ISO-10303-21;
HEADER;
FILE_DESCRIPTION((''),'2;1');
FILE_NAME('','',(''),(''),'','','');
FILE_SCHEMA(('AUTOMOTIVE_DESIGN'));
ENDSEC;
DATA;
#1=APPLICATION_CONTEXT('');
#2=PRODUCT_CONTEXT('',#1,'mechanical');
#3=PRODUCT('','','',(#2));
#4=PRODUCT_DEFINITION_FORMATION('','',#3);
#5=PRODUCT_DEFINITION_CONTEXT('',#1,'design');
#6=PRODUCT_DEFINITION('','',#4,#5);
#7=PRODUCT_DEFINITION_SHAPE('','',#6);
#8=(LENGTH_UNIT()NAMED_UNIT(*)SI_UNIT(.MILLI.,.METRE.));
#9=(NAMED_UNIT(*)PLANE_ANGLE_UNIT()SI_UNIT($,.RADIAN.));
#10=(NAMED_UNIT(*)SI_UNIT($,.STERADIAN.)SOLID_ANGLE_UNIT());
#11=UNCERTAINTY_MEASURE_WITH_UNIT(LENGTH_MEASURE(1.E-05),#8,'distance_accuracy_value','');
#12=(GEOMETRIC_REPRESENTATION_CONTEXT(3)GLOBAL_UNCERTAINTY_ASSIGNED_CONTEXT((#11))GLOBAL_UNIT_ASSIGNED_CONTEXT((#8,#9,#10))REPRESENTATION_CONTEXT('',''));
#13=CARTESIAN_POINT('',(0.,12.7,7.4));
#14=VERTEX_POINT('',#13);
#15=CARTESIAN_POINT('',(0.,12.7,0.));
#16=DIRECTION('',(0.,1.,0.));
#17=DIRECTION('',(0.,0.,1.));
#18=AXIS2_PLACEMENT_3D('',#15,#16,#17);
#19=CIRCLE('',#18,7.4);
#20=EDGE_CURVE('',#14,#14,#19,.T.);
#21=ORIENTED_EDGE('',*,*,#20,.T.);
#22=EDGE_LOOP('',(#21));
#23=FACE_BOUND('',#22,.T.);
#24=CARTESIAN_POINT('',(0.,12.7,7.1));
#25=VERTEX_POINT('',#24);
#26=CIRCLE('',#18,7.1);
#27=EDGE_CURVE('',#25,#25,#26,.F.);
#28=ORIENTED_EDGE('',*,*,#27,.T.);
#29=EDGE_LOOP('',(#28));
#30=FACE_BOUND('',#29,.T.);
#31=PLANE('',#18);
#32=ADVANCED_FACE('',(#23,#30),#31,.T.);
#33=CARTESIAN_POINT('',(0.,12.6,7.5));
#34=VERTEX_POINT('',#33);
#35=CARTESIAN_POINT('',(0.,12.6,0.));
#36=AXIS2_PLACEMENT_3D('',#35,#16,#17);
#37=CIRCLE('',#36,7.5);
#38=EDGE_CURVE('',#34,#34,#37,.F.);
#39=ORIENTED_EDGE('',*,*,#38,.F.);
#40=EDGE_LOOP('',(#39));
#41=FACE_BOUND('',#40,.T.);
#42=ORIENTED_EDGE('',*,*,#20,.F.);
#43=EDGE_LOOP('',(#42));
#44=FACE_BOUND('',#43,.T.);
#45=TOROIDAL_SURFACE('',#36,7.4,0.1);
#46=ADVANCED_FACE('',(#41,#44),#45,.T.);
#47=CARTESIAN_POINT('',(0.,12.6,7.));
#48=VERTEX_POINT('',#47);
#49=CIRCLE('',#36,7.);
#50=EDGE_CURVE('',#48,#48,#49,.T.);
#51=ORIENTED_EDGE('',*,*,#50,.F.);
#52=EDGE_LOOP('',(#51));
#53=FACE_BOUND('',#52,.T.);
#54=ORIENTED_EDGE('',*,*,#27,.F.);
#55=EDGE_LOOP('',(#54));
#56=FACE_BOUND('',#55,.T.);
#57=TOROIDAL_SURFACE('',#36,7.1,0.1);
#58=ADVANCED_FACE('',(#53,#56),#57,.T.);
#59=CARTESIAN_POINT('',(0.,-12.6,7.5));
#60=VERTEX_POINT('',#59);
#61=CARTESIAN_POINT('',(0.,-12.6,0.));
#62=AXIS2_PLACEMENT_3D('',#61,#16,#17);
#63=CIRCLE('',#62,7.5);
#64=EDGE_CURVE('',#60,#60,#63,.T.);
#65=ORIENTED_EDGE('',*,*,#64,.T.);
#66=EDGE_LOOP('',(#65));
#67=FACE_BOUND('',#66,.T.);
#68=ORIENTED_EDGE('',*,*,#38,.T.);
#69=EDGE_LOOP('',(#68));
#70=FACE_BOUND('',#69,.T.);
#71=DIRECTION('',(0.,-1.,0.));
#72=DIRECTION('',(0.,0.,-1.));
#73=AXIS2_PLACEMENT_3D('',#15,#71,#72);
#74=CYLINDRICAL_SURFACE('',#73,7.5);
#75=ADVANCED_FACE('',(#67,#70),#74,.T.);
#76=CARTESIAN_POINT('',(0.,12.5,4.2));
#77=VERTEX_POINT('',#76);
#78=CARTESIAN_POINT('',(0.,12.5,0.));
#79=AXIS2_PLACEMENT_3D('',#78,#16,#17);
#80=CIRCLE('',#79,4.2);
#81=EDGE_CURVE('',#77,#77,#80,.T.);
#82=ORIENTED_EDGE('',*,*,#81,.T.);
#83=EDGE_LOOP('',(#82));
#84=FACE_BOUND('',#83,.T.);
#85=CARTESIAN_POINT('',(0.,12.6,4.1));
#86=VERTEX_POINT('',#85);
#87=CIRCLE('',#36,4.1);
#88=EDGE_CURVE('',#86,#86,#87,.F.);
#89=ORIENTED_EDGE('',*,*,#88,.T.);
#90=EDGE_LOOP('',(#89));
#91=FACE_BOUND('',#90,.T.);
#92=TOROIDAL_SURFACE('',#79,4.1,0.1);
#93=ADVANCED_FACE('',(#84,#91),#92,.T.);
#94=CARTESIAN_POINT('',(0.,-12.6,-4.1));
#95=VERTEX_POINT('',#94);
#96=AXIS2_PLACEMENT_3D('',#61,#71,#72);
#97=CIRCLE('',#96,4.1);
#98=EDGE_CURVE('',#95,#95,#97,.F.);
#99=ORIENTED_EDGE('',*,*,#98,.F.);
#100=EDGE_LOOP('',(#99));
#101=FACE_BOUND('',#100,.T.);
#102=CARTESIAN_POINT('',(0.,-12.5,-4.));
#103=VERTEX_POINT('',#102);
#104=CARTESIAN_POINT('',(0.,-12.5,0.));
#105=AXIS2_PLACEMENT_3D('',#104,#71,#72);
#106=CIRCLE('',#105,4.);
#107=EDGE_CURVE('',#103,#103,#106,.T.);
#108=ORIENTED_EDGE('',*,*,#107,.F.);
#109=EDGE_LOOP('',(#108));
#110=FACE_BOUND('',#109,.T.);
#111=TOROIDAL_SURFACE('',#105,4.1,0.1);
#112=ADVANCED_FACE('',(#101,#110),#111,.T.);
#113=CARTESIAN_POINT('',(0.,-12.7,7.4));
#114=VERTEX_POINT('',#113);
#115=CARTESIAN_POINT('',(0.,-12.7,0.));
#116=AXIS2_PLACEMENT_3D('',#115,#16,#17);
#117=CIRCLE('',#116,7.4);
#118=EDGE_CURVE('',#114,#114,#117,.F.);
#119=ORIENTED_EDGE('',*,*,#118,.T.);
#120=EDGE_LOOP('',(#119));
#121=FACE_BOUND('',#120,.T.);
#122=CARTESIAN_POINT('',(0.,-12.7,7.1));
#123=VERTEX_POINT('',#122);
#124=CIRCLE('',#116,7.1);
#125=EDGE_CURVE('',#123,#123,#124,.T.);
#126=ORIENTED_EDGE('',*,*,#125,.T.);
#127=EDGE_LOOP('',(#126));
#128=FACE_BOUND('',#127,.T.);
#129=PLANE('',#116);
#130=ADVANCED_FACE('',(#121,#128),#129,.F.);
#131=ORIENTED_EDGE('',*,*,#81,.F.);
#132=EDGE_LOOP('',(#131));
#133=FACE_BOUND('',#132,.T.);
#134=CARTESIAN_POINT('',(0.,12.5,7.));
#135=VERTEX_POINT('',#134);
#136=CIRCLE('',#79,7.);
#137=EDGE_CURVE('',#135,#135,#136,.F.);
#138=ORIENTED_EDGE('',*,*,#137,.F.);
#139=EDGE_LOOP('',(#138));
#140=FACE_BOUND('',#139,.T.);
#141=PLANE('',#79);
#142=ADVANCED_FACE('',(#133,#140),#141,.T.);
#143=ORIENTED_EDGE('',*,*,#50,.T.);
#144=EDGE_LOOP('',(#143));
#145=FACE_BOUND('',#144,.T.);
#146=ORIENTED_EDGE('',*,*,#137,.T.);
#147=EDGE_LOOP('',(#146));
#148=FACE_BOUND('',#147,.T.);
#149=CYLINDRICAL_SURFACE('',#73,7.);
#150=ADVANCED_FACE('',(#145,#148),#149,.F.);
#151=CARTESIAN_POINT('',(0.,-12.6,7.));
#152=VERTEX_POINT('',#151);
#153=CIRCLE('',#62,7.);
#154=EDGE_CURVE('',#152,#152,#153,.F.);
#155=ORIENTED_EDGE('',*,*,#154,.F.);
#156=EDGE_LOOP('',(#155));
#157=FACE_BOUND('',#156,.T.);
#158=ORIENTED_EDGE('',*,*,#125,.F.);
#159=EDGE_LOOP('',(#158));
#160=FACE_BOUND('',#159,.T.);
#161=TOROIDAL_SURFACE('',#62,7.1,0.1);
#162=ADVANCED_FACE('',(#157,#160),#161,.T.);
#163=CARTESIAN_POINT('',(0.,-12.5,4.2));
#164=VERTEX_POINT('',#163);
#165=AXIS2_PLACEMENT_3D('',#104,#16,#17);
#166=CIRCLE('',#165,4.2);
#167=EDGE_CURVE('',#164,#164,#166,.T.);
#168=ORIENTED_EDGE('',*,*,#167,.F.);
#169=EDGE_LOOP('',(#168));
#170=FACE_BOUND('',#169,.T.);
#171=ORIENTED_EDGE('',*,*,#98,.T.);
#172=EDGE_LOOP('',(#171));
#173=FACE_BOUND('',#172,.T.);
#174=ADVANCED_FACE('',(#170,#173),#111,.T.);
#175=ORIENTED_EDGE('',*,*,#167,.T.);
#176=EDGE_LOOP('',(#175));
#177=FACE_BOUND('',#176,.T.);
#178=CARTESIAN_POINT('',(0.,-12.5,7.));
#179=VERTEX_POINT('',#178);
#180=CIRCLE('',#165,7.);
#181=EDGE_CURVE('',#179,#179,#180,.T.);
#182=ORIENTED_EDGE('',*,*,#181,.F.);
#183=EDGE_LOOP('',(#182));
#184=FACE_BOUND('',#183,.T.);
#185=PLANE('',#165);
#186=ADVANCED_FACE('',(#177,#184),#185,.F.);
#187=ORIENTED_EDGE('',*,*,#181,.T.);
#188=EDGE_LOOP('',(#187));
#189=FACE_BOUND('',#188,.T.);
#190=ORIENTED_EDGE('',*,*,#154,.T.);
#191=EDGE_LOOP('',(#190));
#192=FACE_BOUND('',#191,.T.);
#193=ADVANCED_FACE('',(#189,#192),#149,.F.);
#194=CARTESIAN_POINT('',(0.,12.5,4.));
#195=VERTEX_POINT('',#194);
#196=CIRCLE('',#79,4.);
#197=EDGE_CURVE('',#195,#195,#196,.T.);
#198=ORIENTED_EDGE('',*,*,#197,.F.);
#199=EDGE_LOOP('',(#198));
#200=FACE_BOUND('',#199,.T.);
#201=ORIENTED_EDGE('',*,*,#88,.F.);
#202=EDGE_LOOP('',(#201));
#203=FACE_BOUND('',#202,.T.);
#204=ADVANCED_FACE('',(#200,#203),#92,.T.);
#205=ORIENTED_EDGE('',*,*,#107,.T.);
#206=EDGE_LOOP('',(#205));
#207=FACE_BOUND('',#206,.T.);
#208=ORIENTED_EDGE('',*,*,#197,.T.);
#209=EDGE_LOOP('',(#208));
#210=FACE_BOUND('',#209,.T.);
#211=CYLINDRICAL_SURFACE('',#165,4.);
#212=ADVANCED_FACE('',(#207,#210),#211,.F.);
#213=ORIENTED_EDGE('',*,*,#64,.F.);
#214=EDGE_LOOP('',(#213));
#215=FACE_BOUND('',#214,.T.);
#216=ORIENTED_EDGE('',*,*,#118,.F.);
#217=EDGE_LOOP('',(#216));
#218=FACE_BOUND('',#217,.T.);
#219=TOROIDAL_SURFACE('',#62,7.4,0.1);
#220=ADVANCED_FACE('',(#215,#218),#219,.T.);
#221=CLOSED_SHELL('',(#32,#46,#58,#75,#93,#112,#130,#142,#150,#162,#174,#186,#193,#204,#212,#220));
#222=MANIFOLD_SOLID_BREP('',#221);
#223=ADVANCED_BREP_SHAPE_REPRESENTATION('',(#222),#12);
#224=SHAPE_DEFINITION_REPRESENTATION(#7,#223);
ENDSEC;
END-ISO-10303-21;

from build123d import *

# Parameters (mm, degrees)
SKETCH1_R            = 7
BOSS_EXTRUDE1_DEPTH  = 12.5
SKETCH2_R            = 4
CUT_EXTRUDE1_DEPTH   = 25
BOSS_EXTRUDE2_START  = 0.1
SKETCH3_R            = 4.2
SKETCH3_R_2          = 4
BOSS_EXTRUDE2_DEPTH  = 0.1
FILLET1_R            = 0.1
FILLET1_OF_MIRROR1_R = 0.1
SKETCH4_R            = 7.5
SKETCH4_R_2          = 7
BOSS_EXTRUDE4_DEPTH  = 12.7
FILLET2_R            = 0.1
FILLET3_R            = 0.1


with BuildPart() as part:
    # Sketch1 → Boss-Extrude1 (new, symmetric)
    with BuildSketch(Plane(origin=(0, 0, 0), x_dir=(1, 0, 0), z_dir=(0, 1, 0))):
        with Locations(Location((0, 0, 0), (0, 0, 270))):
            Circle(SKETCH1_R)
    extrude(amount=BOSS_EXTRUDE1_DEPTH, both=True)

    # Sketch2 → Cut-Extrude1 (cut)
    with BuildSketch(Plane(origin=(0, 12.5, 0), x_dir=(1, 0, 0), z_dir=(0, 1, 0))):
        with Locations(Location((0, 0, 0), (0, 0, 270))):
            Circle(SKETCH2_R)
    extrude(amount=-CUT_EXTRUDE1_DEPTH, mode=Mode.SUBTRACT)

    # Sketch3 → Boss-Extrude2 (add)
    with BuildSketch(Plane(origin=(0, 12.5, 0), x_dir=(1, 0, 0), z_dir=(0, 1, 0)).offset(BOSS_EXTRUDE2_START)):
        with Locations(Location((0, 0, 0), (0, 0, 270))):
            Circle(SKETCH3_R)
        with Locations(Location((0, 0, 0), (0, 0, 270))):
            Circle(SKETCH3_R_2, mode=Mode.SUBTRACT)
    boss_extrude2 = extrude(amount=-BOSS_EXTRUDE2_DEPTH)

    # Fillet1
    fillet1_edges = [part.edges().sort_by_distance(p)[0] for p in [
        (0, 12.6, -4.2),
        (0, 12.6, -4),
    ]]
    fillet(fillet1_edges, radius=FILLET1_R - 0.0001)  # a hair under: the kernel refuses the full size

    # Mirror1: Boss-Extrude2 across plane
    add(boss_extrude2.mirror(Plane.ZX))

    # Fillet1 of Mirror1
    fillet1_of_mirror1_edges = [part.edges().sort_by_distance(p)[0] for p in [
        (0, -12.6, -4.2),
        (0, -12.6, -4),
    ]]
    fillet(fillet1_of_mirror1_edges, radius=FILLET1_OF_MIRROR1_R - 0.0001)  # a hair under: the kernel refuses the full size

    # Sketch4 → Boss-Extrude4 (add, symmetric)
    with BuildSketch(Plane(origin=(0, 0, 0), x_dir=(1, 0, 0), z_dir=(0, 1, 0))):
        with Locations(Location((0, 0, 0), (0, 0, 270))):
            Circle(SKETCH4_R)
        with Locations(Location((0, 0, 0), (0, 0, 270))):
            Circle(SKETCH4_R_2, mode=Mode.SUBTRACT)
    extrude(amount=BOSS_EXTRUDE4_DEPTH, both=True)

    # Fillet2
    fillet2_edges = [part.edges().sort_by_distance(p)[0] for p in [
        (0, 12.7, -7.5),
        (0, 12.7, -7),
    ]]
    fillet(fillet2_edges, radius=FILLET2_R)

    # Fillet3
    fillet3_edges = [part.edges().sort_by_distance(p)[0] for p in [
        (0, -12.7, -7),
        (0, -12.7, -7.5),
    ]]
    fillet(fillet3_edges, radius=FILLET3_R)


solid = part.part
